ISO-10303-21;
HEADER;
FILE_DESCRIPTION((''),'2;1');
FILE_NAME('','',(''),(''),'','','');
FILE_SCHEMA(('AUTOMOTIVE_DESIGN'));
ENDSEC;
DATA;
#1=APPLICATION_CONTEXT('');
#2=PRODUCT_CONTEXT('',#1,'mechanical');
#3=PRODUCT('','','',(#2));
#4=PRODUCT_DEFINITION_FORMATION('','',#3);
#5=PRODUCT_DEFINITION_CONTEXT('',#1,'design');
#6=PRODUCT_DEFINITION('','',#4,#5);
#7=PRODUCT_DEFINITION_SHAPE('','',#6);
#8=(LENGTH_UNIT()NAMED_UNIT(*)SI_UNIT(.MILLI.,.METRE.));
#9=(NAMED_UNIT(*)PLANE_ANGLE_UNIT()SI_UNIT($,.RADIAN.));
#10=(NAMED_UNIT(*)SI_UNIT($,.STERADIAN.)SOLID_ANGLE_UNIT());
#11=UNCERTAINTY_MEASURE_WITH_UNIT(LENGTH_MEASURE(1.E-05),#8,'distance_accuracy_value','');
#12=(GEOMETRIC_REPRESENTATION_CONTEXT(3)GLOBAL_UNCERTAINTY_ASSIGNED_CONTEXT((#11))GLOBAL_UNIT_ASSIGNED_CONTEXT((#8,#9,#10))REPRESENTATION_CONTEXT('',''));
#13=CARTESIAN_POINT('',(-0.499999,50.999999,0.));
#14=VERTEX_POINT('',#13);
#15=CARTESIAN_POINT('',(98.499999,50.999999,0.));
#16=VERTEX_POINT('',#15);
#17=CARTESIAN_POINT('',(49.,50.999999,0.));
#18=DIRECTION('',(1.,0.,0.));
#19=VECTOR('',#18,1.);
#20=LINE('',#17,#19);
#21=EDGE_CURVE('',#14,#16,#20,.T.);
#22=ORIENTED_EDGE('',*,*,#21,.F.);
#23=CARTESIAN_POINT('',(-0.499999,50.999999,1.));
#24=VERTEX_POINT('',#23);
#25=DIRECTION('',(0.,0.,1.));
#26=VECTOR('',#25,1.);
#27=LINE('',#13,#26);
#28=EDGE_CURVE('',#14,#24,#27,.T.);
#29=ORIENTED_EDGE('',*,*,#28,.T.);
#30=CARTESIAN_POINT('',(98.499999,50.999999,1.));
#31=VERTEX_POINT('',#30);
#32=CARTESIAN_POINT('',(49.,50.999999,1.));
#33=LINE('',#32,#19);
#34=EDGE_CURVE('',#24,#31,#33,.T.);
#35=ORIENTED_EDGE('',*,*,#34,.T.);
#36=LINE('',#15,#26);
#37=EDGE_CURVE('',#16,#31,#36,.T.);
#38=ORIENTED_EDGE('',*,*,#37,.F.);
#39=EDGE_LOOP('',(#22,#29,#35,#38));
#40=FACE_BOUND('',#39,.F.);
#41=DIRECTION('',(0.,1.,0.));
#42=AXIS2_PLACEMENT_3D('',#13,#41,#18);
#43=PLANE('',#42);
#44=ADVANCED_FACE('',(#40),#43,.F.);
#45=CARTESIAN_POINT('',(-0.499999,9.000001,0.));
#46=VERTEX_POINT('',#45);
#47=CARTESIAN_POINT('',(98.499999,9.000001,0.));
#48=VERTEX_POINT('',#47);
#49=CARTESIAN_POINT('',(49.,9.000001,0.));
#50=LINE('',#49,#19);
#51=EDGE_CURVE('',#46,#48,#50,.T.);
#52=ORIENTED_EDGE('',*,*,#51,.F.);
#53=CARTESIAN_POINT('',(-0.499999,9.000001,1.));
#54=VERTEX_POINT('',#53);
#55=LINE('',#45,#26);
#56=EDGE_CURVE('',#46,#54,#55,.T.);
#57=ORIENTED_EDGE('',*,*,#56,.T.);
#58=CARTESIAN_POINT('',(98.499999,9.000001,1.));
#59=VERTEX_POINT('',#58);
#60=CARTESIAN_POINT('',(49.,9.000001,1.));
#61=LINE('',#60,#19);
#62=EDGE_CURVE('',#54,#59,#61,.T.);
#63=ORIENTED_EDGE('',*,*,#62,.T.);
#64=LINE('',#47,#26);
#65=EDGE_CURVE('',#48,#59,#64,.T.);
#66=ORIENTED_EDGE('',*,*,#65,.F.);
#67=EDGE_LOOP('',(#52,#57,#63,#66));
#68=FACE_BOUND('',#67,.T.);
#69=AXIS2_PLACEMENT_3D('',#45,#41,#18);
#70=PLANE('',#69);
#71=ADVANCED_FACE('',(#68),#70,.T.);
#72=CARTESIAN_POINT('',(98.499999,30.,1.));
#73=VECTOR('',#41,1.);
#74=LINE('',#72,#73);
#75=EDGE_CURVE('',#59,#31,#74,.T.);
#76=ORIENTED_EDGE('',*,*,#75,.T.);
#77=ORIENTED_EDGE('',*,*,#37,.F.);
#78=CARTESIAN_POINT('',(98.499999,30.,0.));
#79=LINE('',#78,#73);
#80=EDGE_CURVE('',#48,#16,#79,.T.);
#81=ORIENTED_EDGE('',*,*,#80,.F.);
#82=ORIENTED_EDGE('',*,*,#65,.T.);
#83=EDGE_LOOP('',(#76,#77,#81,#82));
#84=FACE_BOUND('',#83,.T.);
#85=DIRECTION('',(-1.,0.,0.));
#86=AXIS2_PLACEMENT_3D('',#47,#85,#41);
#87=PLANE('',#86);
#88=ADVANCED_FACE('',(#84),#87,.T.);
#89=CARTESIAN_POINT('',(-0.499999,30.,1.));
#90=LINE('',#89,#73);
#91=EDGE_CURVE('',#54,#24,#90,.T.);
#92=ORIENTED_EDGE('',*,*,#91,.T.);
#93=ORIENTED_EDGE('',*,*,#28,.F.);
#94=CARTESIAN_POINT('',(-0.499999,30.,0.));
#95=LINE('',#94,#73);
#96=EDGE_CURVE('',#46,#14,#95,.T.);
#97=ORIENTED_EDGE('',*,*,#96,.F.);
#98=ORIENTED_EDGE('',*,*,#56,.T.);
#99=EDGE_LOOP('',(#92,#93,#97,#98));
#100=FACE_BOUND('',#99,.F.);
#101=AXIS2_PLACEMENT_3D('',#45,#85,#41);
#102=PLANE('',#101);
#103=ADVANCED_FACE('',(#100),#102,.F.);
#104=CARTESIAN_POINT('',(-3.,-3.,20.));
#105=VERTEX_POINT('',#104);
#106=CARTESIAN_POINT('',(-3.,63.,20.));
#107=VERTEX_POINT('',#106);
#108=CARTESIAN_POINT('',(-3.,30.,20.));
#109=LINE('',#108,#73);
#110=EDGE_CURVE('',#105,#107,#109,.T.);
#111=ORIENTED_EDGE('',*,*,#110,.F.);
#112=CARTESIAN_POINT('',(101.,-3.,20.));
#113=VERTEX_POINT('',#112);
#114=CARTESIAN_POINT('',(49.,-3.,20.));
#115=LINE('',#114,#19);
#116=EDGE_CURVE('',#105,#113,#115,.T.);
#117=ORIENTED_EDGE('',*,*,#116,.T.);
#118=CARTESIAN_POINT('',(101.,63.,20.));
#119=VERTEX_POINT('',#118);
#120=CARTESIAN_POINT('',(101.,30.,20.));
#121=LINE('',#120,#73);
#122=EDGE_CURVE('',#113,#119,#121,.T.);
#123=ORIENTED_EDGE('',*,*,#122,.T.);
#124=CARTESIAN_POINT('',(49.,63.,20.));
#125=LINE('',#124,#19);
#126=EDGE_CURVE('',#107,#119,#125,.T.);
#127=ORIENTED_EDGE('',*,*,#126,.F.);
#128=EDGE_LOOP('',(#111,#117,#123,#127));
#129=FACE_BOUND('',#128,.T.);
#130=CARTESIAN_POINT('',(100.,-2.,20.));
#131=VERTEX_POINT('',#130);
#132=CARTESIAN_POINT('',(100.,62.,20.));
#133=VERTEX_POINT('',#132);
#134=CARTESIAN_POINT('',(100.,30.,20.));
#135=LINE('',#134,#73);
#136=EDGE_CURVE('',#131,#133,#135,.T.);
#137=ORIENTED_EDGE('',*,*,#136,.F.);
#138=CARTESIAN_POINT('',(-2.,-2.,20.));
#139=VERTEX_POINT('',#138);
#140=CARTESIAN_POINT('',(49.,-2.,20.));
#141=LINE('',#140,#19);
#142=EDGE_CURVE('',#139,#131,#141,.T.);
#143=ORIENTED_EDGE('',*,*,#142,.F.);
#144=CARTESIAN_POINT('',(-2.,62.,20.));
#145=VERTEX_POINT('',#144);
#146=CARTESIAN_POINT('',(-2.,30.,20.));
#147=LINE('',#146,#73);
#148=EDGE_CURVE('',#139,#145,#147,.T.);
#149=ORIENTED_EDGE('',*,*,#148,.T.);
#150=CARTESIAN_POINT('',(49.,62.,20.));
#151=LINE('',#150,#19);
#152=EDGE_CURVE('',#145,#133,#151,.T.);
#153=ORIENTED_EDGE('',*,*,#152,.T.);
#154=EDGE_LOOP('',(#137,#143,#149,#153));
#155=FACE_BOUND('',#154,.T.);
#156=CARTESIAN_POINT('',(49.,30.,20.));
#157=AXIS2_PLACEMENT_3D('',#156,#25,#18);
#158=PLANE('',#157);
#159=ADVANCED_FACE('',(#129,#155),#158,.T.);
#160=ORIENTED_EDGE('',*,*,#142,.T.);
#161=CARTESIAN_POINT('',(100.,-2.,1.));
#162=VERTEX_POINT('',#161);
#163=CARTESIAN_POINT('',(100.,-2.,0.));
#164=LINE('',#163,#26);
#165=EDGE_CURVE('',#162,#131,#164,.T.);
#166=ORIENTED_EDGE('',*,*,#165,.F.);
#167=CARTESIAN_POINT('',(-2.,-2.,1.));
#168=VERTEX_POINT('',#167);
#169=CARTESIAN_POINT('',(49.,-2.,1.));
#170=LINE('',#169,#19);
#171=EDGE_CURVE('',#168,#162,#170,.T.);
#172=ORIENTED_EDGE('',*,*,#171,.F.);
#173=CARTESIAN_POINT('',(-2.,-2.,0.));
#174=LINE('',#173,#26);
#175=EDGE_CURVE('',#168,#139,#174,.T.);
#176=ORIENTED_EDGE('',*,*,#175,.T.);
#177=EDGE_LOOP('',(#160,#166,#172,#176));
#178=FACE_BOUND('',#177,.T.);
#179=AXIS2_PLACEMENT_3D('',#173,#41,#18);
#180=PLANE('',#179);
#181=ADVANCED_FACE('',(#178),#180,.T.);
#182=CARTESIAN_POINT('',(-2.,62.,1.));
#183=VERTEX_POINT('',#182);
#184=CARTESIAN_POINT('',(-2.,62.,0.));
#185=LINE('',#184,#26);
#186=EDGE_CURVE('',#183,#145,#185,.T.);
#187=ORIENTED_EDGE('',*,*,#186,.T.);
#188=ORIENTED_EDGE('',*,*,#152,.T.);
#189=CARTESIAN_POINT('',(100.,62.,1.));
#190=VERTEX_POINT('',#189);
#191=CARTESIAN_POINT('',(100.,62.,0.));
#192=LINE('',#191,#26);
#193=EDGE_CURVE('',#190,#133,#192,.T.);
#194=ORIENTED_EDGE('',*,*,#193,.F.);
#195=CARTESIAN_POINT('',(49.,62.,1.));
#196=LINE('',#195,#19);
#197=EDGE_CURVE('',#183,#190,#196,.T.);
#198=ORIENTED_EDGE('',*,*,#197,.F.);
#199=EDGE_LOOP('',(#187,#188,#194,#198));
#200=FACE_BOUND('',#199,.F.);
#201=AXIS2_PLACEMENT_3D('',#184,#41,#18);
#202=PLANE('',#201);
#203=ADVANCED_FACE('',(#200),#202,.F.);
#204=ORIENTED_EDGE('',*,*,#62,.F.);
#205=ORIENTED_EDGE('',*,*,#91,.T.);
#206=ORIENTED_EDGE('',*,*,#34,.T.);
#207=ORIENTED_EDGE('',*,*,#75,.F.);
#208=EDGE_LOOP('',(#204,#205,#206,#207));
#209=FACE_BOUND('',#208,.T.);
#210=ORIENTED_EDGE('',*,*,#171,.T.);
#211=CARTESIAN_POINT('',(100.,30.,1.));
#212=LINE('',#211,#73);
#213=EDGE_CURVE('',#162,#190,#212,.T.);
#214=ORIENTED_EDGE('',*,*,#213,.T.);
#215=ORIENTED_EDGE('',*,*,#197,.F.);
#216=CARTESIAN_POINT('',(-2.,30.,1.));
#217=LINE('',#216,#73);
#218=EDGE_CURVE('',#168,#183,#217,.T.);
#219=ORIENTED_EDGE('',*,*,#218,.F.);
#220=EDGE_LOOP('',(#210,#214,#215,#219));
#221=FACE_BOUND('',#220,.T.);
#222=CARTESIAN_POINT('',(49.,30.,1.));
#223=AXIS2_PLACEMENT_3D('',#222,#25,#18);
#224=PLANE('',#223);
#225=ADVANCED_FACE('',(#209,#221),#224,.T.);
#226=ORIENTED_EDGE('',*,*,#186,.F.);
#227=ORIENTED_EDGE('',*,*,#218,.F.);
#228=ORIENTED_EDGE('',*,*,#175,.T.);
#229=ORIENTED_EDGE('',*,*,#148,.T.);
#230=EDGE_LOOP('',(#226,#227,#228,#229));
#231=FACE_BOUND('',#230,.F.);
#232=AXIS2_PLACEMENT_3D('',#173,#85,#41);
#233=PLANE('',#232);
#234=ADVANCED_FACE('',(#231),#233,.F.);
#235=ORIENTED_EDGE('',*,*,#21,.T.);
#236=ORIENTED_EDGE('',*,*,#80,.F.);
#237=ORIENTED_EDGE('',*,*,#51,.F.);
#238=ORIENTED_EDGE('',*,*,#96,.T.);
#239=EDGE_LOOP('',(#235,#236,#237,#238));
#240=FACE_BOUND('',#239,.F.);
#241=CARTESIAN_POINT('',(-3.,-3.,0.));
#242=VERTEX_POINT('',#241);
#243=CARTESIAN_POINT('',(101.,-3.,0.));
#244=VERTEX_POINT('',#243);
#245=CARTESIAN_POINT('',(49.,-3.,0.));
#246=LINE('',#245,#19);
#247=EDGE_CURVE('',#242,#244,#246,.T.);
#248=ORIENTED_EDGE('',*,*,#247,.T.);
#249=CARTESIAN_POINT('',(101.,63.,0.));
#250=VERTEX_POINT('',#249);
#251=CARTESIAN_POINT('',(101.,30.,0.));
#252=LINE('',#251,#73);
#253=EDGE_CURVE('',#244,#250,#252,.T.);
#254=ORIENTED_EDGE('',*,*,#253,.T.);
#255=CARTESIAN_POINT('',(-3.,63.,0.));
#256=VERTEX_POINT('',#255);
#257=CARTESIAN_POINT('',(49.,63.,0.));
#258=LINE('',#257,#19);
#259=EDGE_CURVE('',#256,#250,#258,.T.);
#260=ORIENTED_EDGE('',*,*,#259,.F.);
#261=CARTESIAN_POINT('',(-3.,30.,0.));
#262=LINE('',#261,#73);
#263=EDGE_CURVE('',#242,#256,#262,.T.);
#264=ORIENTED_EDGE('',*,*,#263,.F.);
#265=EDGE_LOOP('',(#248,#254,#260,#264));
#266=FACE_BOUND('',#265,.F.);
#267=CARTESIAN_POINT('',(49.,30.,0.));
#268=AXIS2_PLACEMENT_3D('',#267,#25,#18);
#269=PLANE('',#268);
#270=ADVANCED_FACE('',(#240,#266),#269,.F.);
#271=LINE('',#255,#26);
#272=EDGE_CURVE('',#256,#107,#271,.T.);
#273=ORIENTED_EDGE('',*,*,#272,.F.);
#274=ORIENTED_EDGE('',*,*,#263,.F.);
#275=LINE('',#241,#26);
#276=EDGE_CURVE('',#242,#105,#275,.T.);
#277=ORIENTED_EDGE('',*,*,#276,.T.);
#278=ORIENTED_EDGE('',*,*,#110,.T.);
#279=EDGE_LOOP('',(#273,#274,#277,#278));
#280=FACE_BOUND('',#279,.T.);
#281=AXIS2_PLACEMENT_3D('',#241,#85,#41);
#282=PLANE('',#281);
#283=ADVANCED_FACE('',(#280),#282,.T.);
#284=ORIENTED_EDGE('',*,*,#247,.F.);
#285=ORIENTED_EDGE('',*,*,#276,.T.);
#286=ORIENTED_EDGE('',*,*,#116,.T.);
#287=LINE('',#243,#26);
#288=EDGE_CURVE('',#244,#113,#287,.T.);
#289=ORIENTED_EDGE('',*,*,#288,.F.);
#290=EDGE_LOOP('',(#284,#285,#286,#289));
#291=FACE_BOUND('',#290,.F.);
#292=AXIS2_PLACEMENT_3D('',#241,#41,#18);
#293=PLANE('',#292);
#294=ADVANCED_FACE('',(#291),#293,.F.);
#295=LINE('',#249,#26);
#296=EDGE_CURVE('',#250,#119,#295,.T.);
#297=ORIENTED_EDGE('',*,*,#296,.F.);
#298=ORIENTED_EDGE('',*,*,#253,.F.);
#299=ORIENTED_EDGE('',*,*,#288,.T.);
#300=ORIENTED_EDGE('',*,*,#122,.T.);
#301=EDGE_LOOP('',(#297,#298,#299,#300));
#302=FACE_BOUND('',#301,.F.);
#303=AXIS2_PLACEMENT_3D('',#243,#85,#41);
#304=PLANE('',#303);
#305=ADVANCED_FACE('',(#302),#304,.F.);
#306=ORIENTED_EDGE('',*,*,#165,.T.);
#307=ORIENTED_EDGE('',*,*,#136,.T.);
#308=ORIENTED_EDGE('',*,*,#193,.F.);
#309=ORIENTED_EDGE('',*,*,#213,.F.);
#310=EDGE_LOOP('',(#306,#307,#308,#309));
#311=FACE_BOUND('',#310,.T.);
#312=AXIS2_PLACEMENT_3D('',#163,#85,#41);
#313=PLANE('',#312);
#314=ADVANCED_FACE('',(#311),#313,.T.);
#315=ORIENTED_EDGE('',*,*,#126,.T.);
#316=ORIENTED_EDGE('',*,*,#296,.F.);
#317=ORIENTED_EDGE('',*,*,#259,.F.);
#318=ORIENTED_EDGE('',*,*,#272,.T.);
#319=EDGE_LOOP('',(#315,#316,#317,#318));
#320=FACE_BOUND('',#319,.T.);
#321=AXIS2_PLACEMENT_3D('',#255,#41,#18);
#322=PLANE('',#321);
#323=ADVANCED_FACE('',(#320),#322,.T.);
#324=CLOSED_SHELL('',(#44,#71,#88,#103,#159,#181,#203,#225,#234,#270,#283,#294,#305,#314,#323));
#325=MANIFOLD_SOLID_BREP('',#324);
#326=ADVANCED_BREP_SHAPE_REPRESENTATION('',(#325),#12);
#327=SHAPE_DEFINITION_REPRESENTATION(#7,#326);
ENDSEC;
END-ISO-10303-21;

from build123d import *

# Parameters (mm, degrees)
F3_W     = 104
F3_H     = 66
F3_W_2   = 102
F3_H_2   = 64
F4_DEPTH = 20
F1_W     = 102
F1_H     = 64
F1_W_2   = 98.9999980927
F1_H_2   = 41.9999980927
F5_DEPTH = 1


# Not quite as in the source:
# - the program builds the solid bodies; features that only make, move or delete a surface that nothing else refers to are left out


with BuildPart() as f4:
    # F3 (on face) → F4 (new body)
    with BuildSketch(Plane.XY):
        with Locations((49, 30)):
            Rectangle(F3_W, F3_H)
        with Locations((49, 30)):
            Rectangle(F3_W_2, F3_H_2, mode=Mode.SUBTRACT)
    extrude(amount=F4_DEPTH)

    # F1 (on Top) → F5 (join)
    with BuildSketch(Plane.XY):
        with Locations((49, 30)):
            Rectangle(F1_W, F1_H)
        with Locations((49, 30)):
            Rectangle(F1_W_2, F1_H_2, mode=Mode.SUBTRACT)
    extrude(amount=F5_DEPTH)


solid = f4.part
